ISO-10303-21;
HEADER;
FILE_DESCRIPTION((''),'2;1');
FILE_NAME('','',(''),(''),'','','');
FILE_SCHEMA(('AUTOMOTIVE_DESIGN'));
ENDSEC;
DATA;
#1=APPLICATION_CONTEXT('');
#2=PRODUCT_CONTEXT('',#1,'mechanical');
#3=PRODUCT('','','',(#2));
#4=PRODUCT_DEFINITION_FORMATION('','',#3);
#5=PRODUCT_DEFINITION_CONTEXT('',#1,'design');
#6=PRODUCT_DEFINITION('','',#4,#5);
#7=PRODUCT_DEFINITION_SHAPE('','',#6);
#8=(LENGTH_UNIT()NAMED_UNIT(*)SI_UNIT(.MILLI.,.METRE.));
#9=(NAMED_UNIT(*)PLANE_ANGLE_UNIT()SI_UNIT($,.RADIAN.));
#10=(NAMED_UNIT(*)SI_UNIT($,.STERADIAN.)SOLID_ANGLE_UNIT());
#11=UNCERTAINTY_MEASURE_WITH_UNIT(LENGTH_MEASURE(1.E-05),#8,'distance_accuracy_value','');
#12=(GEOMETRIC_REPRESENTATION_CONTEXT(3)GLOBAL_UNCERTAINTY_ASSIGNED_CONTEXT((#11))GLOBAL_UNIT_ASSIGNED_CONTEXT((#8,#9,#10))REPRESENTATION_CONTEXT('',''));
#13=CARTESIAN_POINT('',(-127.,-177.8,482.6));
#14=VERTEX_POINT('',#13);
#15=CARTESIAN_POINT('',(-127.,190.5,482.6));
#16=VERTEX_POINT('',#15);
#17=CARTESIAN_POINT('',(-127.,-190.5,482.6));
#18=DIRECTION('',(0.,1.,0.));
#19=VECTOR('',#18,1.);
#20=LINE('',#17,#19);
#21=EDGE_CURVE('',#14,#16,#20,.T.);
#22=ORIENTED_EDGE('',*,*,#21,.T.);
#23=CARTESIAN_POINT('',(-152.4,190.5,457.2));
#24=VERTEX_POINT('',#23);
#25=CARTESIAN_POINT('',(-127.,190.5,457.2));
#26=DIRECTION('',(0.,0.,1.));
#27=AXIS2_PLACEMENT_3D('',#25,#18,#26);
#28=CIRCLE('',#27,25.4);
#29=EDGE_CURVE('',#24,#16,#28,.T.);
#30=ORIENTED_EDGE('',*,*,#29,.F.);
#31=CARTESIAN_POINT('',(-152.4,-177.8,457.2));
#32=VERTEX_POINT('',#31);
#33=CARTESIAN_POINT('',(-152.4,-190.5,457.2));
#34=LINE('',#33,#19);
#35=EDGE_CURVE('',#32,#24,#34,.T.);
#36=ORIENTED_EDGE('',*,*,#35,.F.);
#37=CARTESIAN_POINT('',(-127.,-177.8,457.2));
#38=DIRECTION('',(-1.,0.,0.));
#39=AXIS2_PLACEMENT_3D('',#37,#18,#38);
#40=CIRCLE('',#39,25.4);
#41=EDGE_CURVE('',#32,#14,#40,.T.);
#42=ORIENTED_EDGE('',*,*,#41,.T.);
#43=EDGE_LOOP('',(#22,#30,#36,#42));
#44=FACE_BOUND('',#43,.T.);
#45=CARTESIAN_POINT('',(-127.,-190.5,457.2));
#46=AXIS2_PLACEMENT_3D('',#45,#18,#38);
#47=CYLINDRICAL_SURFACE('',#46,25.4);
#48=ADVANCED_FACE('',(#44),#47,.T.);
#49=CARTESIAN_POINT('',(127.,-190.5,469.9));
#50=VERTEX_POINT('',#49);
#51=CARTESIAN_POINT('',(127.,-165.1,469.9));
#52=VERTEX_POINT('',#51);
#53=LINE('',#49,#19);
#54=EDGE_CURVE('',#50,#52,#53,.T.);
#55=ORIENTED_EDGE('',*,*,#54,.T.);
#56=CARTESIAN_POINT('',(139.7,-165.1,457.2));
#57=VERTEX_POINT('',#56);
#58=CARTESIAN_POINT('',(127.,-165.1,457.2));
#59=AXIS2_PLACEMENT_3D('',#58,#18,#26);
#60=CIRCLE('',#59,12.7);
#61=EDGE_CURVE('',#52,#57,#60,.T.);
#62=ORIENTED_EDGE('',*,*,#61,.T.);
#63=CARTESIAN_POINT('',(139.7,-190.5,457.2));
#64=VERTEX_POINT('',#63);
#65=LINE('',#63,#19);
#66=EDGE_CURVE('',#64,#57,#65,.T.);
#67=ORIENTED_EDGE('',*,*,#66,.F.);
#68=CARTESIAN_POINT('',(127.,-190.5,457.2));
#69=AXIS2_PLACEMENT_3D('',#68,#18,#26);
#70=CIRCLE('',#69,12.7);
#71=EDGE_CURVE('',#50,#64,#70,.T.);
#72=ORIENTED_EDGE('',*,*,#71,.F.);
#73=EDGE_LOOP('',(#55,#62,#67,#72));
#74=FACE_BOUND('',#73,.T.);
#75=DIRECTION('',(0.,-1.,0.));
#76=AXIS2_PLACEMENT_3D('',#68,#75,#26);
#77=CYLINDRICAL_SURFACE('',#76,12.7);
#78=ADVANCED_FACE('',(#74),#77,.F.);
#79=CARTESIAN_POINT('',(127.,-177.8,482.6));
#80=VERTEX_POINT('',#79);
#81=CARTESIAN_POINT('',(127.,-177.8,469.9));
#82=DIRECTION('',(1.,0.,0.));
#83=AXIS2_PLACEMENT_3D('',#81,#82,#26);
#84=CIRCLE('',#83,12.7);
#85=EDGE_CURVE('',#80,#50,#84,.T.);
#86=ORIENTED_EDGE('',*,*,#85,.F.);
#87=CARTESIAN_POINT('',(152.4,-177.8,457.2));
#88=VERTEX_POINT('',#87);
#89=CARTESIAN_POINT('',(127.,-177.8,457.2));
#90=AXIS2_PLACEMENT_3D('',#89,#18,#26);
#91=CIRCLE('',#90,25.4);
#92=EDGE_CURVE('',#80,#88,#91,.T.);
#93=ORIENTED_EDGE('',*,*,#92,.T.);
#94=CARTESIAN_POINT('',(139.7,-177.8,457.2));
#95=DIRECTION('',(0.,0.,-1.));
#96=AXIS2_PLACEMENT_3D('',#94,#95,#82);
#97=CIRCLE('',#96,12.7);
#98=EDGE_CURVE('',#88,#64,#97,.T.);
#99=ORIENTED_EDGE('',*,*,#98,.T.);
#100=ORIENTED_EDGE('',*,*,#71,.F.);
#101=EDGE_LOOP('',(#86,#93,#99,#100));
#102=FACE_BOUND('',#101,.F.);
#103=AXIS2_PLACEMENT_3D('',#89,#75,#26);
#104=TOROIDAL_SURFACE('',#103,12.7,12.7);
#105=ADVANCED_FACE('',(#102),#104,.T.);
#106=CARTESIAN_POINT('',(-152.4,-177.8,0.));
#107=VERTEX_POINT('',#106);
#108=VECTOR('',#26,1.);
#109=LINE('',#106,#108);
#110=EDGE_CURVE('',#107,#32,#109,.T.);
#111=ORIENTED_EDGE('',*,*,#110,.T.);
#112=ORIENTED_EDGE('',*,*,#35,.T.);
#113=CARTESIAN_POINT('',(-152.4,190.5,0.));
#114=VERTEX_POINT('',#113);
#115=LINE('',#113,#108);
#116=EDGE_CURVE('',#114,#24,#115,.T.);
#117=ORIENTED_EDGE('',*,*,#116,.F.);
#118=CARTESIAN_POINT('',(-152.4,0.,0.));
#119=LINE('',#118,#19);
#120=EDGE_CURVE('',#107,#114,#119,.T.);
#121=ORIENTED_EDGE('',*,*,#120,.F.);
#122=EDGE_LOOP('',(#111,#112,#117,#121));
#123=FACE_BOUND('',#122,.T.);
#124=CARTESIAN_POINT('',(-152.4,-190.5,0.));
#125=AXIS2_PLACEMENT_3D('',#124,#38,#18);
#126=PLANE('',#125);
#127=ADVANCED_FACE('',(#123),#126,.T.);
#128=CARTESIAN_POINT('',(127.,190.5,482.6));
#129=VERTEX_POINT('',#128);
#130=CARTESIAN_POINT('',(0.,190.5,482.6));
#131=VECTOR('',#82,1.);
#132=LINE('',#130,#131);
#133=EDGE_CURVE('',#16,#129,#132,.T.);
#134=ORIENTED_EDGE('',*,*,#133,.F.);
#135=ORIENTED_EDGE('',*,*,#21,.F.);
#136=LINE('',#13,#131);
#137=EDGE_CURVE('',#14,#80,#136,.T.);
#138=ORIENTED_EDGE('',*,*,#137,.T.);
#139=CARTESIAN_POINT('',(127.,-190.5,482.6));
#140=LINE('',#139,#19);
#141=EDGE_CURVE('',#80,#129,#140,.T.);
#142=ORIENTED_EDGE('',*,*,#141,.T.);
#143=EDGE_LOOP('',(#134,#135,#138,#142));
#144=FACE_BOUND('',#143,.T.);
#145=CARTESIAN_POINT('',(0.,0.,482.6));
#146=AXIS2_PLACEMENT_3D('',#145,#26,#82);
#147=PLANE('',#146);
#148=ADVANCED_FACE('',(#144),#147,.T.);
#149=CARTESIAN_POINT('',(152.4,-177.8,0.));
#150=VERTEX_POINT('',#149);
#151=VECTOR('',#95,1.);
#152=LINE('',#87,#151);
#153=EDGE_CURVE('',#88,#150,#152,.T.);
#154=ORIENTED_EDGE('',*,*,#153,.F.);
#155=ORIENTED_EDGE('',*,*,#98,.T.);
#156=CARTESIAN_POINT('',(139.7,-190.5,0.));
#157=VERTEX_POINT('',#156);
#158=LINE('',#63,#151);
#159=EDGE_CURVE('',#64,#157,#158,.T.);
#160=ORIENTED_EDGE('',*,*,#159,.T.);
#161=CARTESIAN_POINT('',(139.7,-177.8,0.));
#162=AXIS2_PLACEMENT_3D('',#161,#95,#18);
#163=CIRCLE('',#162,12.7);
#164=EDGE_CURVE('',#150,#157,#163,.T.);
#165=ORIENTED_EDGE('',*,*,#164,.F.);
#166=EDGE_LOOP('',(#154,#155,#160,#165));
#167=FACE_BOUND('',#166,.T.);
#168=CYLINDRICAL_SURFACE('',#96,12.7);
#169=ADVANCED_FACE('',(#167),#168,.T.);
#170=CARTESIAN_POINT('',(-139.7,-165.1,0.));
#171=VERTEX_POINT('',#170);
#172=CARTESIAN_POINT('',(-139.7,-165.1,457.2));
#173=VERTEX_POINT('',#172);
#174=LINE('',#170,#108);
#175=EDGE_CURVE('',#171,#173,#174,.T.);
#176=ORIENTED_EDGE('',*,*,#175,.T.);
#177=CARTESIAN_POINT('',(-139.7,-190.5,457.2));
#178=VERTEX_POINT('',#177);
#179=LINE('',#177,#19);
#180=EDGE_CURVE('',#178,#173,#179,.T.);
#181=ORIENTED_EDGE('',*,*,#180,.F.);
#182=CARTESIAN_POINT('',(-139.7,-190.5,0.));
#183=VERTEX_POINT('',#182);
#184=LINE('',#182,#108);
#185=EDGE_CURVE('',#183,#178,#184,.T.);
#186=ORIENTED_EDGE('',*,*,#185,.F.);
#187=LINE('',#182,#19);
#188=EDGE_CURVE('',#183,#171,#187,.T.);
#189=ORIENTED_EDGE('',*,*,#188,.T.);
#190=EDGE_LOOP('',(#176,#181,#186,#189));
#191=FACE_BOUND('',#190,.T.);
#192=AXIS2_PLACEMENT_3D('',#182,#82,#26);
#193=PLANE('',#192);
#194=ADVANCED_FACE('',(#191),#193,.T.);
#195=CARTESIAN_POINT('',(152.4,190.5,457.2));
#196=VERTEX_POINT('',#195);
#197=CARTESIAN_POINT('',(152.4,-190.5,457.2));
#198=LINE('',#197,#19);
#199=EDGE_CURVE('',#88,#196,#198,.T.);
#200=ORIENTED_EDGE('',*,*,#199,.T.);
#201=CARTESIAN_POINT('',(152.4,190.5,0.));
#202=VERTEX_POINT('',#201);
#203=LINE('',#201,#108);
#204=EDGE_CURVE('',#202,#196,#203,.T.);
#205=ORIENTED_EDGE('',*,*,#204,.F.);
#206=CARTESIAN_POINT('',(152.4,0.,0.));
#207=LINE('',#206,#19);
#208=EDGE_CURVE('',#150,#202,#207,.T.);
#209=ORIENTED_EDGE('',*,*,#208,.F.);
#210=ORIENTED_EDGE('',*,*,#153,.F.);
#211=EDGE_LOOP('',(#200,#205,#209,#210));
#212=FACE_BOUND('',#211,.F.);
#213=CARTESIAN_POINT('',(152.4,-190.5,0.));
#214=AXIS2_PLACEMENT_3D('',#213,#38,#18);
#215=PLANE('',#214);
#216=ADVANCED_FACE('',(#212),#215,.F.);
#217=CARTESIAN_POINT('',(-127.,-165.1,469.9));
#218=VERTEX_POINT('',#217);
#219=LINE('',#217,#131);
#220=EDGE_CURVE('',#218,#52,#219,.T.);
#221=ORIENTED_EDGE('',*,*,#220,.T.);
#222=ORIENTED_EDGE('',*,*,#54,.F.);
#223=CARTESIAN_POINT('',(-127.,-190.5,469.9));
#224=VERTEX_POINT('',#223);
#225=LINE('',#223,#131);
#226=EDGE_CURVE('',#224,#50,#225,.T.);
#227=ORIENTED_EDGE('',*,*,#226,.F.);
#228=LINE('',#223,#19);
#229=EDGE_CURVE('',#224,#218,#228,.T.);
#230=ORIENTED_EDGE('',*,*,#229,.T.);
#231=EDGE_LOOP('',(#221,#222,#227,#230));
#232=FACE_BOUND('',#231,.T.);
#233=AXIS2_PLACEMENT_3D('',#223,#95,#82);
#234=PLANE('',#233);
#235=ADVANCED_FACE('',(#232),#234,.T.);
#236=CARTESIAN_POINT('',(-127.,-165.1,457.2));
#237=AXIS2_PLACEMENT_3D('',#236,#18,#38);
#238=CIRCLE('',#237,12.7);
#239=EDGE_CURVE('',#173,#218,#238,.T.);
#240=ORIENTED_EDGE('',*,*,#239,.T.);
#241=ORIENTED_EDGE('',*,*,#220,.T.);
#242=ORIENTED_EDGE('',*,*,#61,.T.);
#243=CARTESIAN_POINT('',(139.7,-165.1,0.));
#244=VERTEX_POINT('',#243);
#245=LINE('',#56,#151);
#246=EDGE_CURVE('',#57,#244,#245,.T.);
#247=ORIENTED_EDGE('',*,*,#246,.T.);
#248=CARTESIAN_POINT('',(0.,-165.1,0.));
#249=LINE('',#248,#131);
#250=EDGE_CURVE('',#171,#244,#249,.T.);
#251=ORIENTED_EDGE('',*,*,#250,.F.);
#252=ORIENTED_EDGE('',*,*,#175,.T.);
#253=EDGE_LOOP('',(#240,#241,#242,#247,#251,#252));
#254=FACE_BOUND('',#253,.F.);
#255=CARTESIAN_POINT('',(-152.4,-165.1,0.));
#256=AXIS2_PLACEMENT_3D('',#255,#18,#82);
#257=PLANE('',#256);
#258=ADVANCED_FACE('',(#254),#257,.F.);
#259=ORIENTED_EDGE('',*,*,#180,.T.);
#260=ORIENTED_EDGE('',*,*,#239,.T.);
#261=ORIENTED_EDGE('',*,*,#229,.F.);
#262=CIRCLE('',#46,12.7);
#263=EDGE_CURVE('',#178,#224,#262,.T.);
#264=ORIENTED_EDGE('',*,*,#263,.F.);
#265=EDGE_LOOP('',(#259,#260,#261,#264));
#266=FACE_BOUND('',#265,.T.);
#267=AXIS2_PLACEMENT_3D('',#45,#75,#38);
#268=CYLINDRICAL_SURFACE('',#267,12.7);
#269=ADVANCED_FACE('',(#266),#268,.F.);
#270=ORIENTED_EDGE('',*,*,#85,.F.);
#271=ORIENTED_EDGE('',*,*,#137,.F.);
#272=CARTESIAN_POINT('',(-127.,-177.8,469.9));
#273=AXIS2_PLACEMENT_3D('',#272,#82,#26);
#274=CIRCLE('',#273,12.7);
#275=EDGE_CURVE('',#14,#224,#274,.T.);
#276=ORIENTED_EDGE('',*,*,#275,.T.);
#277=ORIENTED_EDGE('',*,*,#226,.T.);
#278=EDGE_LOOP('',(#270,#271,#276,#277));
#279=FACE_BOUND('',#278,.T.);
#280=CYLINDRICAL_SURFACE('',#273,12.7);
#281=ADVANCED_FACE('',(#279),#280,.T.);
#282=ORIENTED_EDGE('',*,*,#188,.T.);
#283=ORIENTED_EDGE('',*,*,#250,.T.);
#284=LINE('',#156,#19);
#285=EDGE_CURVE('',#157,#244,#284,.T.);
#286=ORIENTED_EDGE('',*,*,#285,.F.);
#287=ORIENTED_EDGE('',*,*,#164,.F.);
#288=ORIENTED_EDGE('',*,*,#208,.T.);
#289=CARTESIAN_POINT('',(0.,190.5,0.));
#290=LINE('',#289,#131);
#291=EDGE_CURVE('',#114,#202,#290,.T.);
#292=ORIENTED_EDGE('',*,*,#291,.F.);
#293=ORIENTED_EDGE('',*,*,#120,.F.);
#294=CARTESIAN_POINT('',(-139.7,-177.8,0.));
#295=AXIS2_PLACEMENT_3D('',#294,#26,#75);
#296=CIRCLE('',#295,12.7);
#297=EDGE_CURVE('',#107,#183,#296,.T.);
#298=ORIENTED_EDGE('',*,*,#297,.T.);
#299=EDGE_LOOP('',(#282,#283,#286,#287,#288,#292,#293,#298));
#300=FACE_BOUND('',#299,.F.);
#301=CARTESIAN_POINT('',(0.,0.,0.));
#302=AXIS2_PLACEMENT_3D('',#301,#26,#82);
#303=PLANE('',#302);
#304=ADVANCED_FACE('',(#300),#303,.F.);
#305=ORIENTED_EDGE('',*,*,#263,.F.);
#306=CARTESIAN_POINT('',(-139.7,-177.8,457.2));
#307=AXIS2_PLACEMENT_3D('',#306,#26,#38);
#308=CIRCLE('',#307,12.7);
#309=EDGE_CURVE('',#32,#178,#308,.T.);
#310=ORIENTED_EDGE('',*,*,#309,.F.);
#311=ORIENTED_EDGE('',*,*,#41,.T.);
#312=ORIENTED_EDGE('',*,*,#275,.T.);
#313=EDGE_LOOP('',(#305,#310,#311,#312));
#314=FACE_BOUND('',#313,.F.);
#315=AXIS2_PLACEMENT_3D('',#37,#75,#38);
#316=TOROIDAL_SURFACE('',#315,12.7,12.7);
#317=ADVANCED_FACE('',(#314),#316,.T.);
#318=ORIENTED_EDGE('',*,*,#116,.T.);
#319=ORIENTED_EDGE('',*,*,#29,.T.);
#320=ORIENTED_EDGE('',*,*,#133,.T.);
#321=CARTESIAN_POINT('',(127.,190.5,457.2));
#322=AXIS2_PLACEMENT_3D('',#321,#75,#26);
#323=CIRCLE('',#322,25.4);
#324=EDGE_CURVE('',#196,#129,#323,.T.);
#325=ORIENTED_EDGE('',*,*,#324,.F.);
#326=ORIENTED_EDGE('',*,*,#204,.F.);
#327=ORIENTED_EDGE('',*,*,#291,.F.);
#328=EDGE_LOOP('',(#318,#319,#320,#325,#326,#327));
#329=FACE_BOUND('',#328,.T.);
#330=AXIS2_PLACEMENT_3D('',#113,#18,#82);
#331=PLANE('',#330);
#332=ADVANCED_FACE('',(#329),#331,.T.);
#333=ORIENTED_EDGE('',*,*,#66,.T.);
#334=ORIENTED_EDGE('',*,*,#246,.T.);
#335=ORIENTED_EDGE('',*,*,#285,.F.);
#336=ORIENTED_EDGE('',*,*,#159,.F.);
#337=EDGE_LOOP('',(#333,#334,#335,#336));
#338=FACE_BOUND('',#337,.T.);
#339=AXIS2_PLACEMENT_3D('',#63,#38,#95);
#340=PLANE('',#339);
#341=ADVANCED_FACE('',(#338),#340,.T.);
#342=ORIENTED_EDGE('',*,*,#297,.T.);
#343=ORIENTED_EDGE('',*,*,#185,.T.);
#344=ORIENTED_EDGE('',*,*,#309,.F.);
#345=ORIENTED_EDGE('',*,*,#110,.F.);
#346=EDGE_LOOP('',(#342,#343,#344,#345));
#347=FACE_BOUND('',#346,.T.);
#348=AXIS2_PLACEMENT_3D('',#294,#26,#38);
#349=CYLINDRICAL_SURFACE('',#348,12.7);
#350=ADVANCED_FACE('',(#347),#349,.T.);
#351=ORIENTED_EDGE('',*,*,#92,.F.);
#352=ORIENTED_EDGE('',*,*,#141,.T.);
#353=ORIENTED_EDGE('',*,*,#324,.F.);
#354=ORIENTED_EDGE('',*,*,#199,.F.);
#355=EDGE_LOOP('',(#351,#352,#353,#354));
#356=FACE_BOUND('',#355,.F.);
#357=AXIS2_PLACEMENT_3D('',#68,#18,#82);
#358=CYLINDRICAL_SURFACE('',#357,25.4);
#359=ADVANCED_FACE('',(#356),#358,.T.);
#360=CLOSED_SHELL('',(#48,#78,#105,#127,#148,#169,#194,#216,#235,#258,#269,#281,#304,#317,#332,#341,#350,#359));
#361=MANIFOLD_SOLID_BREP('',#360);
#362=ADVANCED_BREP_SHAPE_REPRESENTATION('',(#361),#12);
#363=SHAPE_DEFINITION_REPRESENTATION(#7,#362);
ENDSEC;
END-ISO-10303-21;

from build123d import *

# Parameters (mm, degrees)
F0_W     = 304.8
F0_H     = 381
F1_DEPTH = 482.6
F2_R     = 25.4
F3_R     = 12.7
F4_DEPTH = 25.4


# Not quite as in the source:
# - the program builds the solid bodies; features that only make, move or delete a surface that nothing else refers to are left out


with BuildPart() as f1:
    # F0 (on Top) → F1 (new body)
    with BuildSketch(Plane.XY):
        Rectangle(F0_W, F0_H)
    extrude(amount=F1_DEPTH)

    # F2
    f2_edges = [f1.edges().sort_by_distance(p)[0] for p in [
        (-152.4, 0, 482.6),
        (152.4, 0, 482.6),
    ]]
    fillet(f2_edges, radius=F2_R)

    # F3
    f3_edges = [f1.edges().sort_by_distance(p)[0] for p in [
        (-152.4, -190.5, 228.6),
        (-144.960512, -190.5, 475.160512),
        (0, -190.5, 482.6),
        (144.960512, -190.5, 475.160512),
        (152.4, -190.5, 228.6),
    ]]
    fillet(f3_edges, radius=F3_R)

    # F4 (cut): a face of the model
    f4_faces = [f1.faces().sort_by_distance(p)[0] for p in [
        (0, -190.5, 234.8275474118),
    ]]
    extrude(f4_faces, amount=-F4_DEPTH, mode=Mode.SUBTRACT)


solid = f1.part
